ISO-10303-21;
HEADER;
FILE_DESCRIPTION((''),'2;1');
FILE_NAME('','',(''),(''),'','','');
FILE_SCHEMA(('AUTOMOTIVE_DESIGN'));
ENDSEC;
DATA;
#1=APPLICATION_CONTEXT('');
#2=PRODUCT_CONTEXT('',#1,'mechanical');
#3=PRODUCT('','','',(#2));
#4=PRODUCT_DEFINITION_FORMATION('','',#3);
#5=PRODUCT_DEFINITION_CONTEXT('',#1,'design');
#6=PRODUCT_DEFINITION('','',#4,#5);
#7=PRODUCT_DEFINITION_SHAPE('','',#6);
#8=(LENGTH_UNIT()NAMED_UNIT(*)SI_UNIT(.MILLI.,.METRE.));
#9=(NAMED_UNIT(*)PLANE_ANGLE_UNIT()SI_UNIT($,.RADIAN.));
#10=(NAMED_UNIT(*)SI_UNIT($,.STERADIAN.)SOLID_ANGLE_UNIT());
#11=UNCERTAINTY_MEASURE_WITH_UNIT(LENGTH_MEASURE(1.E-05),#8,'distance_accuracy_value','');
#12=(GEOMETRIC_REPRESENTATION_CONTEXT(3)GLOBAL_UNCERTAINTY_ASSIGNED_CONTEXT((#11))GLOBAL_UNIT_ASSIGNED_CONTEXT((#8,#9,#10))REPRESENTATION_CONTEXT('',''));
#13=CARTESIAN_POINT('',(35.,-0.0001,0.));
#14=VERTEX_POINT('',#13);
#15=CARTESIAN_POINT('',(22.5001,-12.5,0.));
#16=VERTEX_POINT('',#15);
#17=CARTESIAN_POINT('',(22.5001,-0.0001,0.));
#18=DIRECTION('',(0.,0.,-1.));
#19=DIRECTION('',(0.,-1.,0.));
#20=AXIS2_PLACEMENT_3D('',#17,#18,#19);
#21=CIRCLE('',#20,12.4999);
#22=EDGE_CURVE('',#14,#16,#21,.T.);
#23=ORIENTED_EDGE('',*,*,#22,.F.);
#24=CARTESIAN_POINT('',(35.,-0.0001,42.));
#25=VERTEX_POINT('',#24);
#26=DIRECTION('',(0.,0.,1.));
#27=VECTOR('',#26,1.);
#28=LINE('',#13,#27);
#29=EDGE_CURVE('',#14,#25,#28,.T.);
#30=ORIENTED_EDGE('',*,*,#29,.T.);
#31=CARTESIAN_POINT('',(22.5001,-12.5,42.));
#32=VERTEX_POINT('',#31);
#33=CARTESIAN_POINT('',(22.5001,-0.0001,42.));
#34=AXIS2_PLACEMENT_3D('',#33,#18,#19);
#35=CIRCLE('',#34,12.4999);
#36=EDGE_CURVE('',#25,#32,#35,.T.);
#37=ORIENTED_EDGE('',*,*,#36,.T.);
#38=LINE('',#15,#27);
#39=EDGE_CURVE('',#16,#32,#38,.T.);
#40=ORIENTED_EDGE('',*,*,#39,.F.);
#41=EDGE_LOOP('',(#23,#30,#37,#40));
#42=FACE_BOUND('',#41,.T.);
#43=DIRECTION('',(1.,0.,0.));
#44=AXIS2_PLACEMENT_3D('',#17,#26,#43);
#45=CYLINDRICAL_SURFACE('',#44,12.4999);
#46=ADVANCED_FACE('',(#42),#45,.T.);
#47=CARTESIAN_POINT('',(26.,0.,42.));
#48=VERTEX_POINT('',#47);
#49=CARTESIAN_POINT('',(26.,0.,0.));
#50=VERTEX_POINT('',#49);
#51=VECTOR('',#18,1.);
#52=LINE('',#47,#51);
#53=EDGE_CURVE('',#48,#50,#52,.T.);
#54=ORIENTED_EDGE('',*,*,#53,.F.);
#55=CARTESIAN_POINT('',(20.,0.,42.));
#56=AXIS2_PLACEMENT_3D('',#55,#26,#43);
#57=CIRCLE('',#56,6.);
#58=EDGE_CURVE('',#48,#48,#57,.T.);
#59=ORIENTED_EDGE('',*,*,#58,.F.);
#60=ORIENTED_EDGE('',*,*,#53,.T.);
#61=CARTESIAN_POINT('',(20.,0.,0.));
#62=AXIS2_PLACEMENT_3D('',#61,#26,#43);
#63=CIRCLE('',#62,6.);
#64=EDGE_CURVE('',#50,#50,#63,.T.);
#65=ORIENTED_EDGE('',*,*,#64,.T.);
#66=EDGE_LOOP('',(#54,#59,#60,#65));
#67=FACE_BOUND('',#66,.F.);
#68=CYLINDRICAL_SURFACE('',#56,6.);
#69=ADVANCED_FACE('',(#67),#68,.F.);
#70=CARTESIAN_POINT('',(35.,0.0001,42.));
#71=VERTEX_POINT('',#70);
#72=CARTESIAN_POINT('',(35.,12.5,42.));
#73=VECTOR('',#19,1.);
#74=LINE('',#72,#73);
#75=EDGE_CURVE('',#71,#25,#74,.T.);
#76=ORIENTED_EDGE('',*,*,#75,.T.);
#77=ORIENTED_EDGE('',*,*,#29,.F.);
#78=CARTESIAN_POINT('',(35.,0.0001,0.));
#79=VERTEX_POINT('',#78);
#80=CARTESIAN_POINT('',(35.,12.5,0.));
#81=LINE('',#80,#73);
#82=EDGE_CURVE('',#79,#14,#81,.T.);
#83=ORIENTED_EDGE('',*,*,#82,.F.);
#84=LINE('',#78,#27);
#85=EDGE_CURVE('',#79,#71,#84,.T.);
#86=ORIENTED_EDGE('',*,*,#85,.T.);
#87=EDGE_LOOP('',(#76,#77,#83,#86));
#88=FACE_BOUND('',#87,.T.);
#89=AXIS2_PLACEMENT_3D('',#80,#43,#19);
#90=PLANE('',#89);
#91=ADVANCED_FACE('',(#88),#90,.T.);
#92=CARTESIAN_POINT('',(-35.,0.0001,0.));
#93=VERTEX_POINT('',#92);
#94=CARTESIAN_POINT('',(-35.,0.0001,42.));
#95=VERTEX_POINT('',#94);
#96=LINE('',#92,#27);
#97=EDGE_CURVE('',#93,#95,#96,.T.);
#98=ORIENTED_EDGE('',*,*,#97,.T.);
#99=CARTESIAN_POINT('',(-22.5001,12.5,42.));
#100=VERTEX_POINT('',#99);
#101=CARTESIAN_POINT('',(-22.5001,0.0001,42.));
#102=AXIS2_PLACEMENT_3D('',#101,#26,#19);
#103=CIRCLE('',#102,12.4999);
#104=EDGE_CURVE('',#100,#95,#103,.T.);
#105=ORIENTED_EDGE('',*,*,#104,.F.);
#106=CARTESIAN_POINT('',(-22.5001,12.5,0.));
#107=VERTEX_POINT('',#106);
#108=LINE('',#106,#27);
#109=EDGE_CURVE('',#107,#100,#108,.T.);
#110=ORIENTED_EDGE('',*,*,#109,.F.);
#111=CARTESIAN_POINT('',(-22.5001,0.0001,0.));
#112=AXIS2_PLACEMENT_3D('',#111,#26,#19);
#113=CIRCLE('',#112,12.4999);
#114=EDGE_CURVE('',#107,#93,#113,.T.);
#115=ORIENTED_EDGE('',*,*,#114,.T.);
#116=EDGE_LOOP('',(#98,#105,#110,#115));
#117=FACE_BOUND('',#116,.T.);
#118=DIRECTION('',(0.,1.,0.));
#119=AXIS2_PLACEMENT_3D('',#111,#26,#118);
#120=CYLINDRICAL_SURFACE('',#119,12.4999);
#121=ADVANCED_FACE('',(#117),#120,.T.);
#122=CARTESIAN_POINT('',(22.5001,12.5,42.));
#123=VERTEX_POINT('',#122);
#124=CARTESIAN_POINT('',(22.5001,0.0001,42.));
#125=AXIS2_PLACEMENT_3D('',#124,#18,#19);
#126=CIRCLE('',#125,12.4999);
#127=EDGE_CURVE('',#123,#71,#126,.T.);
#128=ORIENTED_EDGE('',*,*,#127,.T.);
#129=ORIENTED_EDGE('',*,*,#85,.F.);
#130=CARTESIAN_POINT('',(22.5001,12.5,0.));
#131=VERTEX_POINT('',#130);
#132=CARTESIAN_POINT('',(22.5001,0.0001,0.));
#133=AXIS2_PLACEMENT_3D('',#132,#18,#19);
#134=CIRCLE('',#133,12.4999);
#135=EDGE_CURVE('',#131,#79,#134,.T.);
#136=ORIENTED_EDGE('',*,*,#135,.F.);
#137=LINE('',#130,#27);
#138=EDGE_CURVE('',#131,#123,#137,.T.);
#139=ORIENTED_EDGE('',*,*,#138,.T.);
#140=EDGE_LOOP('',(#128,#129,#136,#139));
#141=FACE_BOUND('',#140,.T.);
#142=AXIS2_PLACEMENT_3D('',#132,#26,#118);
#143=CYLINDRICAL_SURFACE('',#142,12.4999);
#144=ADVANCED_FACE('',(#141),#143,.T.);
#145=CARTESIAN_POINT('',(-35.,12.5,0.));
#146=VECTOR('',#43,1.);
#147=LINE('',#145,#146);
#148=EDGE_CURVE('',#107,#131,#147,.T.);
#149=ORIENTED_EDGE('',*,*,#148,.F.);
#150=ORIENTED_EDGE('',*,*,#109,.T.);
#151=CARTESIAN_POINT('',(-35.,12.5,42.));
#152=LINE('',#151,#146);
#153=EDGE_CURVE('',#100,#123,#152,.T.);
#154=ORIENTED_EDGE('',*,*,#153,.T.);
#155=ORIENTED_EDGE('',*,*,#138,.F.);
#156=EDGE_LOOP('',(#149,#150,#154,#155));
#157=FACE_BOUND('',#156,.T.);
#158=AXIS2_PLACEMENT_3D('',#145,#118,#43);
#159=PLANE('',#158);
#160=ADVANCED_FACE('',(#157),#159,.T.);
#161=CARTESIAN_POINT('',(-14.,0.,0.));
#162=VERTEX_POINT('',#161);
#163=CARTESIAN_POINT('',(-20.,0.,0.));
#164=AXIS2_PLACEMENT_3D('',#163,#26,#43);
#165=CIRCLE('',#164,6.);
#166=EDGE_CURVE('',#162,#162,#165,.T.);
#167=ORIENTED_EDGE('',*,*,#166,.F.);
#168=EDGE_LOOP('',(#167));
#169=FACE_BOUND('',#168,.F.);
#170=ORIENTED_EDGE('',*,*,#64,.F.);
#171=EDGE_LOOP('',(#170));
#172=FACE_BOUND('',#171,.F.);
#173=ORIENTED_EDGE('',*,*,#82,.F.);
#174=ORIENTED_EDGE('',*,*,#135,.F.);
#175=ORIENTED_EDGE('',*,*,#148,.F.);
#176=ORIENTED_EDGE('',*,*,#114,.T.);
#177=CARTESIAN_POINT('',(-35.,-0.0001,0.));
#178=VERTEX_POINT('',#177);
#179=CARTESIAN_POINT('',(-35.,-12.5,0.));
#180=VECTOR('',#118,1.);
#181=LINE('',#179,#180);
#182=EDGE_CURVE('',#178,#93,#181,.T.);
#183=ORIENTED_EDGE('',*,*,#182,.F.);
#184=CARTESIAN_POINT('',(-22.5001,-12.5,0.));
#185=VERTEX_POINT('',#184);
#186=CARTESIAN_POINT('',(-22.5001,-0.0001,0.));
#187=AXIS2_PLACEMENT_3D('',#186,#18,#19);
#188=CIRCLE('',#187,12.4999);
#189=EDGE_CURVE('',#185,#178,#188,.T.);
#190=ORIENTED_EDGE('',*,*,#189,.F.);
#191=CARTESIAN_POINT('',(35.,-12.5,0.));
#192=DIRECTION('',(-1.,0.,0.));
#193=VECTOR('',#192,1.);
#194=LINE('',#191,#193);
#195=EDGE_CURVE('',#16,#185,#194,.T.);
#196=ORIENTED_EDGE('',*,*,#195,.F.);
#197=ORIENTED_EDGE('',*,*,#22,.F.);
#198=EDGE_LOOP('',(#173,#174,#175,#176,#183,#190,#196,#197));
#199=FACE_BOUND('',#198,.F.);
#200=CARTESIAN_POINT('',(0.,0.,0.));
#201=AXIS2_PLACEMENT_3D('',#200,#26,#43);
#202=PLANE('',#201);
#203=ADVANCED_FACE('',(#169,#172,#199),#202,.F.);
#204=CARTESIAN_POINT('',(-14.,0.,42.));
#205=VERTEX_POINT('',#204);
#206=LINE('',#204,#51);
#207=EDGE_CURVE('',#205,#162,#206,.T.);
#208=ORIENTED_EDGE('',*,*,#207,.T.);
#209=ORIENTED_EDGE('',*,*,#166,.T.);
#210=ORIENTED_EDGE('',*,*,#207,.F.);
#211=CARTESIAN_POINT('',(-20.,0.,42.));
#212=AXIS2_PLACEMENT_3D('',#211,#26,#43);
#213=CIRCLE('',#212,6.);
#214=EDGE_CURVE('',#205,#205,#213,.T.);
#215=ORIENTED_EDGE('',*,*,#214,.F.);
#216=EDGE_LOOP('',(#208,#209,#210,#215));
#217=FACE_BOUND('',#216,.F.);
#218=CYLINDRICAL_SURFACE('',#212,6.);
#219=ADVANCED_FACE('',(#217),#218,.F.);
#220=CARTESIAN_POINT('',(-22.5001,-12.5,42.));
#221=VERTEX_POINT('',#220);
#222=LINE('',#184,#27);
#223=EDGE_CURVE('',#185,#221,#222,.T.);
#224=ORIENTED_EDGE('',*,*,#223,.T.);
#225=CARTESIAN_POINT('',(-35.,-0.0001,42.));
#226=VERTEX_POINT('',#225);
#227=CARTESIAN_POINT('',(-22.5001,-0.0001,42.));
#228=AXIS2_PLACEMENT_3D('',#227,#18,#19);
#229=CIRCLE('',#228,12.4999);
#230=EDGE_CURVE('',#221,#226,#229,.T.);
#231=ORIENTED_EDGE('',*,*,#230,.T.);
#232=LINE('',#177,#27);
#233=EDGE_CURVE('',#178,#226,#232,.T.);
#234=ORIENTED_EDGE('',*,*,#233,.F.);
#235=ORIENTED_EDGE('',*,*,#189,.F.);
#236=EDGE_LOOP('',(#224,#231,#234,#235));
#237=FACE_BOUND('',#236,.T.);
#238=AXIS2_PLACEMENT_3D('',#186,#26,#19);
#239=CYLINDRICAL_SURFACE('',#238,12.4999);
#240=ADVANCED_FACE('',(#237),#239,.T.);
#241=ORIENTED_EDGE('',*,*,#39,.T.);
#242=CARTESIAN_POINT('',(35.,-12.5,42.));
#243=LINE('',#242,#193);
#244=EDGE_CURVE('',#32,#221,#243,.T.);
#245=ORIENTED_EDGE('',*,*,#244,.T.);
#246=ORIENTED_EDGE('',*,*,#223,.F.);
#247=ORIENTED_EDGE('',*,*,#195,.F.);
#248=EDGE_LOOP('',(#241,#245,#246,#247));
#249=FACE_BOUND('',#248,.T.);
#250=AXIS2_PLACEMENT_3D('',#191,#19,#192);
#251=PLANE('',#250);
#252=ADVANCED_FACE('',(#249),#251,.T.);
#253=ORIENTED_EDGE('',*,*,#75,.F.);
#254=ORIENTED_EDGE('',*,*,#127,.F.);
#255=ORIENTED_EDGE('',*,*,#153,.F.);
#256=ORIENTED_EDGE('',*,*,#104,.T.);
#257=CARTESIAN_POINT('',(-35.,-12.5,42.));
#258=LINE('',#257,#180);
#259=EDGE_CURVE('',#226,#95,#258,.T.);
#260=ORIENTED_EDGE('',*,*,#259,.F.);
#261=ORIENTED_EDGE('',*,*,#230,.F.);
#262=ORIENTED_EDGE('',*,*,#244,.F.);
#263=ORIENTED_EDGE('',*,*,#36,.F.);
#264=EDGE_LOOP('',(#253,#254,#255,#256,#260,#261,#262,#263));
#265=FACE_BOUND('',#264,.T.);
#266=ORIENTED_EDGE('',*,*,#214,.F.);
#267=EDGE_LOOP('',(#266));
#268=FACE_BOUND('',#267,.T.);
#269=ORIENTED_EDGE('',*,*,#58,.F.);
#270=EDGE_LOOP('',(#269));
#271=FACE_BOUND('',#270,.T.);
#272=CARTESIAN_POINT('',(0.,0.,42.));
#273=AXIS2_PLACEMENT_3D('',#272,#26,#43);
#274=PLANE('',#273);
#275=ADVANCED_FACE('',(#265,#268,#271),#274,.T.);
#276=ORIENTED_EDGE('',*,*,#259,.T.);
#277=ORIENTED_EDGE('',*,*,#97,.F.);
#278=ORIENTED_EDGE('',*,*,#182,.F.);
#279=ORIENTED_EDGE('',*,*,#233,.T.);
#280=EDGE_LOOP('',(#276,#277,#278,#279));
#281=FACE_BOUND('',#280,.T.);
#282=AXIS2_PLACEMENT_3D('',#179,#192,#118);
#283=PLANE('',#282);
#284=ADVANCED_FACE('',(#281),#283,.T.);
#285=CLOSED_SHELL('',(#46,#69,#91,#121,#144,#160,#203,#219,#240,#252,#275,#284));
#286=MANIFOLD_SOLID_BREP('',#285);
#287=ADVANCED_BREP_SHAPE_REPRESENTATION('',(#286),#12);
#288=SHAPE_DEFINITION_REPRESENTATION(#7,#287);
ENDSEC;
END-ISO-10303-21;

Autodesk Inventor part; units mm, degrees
ref_plane "YZ Plane" through (0, 0, 0) normal (1, 0, 0) x (0, 1, 0)
ref_plane "XZ Plane" through (0, 0, 0) normal (0, 1, 0) x (-1, 0, 0)
ref_plane "XY Plane" through (0, 0, 0) normal (0, 0, 1) x (1, 0, 0)
sketch "Sketch1" plane through (0, 0, 0) normal (0, 0, 1) x (1, 0, 0)
  line L0 (-35, 12.5) -> (35, 12.5)
  line L1 (35, 12.5) -> (35, -12.5)
  line L2 (35, -12.5) -> (-35, -12.5)
  line L3 (-35, -12.5) -> (-35, 12.5)
  point P0 (0, 0)
  dimension "d0" = 70
  dimension "d1" = 25
  dimension "d2" = 35
  dimension "d3" = 12.5
extrude "Extrusion1" add sketch "Sketch1" along normal blind 42
full round fillet "Full Round Fillet1" first side at (11.6667, 12.5, 14) centre faces at (-35, 4.1667, 14) second side at (-11.6667, -12.5, 14)
full round fillet "Full Round Fillet2" first side at (15.8333, 12.5, 14) centre faces at (35, -4.1667, 14) second side at (-3.3334, -12.5, 28)
sketch "Sketch2" plane through (0, 0, 42) normal (0, 0, 1) x (1, 0, 0)
  circle A0 centre (-20, 0) radius 6
  circle A1 centre (20, 0) radius 6
  point P0 (0, 0)
  dimension "d6" = 12
  dimension "d7" = 12
  dimension "d8" = 40
  dimension "d9" = 20
extrude "Extrusion2" cut sketch "Sketch2" against normal blind 42
thread "Thread1" size "M12x1.75" class "6H" standard "ANSI Metric M Profile" full length
thread "Thread2" size "M12x1.75" class "6H" standard "ANSI Metric M Profile" full length
properties part number "Topo Macaco" material "Steel ASTM A36"
